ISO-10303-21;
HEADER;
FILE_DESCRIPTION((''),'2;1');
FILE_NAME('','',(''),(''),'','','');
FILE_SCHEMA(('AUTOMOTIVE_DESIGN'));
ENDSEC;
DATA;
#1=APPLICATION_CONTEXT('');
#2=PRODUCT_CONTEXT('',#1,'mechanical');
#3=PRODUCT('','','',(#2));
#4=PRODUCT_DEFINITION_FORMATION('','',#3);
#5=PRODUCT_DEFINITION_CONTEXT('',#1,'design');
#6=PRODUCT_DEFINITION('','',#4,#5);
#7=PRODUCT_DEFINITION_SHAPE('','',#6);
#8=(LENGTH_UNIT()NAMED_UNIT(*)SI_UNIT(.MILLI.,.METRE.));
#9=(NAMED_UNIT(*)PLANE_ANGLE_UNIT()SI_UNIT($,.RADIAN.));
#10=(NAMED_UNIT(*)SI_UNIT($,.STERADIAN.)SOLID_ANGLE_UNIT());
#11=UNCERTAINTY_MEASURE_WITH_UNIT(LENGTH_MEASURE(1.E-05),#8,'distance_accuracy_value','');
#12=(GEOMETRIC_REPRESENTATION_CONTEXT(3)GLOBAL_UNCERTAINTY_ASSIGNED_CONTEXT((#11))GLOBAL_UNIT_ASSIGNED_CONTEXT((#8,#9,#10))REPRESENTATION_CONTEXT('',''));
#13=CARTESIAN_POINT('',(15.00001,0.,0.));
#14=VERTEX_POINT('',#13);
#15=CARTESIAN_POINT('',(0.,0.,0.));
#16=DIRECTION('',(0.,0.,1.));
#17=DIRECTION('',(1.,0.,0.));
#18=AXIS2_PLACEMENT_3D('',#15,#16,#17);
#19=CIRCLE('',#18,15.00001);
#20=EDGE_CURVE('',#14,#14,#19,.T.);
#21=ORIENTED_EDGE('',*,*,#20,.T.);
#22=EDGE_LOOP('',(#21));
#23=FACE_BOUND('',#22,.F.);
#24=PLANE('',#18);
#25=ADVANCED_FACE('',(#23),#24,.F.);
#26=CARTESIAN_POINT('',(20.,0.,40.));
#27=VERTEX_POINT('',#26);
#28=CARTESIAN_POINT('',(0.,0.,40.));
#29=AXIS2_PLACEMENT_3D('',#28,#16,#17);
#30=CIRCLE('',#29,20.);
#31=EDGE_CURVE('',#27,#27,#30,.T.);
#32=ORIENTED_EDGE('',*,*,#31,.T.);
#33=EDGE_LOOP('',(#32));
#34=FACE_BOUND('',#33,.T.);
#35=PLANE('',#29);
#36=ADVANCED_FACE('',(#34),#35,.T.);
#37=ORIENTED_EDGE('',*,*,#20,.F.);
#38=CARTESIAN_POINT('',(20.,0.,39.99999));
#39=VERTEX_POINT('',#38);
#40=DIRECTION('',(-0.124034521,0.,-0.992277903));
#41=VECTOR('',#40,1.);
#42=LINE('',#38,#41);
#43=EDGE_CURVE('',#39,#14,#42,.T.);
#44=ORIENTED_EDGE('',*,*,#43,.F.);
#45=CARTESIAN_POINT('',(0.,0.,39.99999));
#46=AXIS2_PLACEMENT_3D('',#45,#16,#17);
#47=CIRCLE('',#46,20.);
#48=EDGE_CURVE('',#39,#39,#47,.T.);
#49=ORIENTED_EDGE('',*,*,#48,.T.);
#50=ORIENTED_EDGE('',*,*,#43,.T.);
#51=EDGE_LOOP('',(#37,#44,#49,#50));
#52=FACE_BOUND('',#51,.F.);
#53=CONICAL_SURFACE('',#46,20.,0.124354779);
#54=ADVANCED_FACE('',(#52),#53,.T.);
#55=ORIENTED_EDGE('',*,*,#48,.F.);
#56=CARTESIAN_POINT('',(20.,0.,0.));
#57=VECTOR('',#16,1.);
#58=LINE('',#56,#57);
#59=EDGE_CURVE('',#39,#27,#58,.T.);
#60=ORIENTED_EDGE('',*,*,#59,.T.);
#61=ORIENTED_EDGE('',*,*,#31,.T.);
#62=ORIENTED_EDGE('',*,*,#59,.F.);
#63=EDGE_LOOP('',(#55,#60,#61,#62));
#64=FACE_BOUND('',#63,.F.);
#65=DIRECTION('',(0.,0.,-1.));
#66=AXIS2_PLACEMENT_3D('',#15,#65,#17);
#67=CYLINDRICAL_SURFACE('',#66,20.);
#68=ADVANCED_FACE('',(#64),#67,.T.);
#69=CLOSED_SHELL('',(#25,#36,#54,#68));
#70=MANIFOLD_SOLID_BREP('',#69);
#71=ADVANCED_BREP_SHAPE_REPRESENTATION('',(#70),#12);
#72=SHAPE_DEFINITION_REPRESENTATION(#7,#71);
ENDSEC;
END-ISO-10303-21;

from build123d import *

# Parameters (mm, degrees)
F0_R     = 20
F1_DEPTH = 40
F2_SIZE2 = 4.99999
F2_SIZE  = 39.99999


# Not quite as in the source:
# - a fillet or chamfer is up to 0.001 mm smaller than in the source, because OpenCascade refuses the exact size


with BuildPart() as f1:
    # F0 (on Top) → F1 (new body)
    with BuildSketch(Plane.XY):
        Circle(F0_R)
    extrude(amount=F1_DEPTH)

    # F2 (size 40 and 5 in the source; OpenCascade refuses exactly that, so slightly less here)
    f2_edges = [f1.edges().sort_by_distance(p)[0] for p in [
        (-20, 0, 0),
    ]]
    f2_side = f1.faces().sort_by_distance((-20, 0, 20))[0]
    chamfer(f2_edges, length=F2_SIZE, length2=F2_SIZE2, reference=f2_side)


solid = f1.part
